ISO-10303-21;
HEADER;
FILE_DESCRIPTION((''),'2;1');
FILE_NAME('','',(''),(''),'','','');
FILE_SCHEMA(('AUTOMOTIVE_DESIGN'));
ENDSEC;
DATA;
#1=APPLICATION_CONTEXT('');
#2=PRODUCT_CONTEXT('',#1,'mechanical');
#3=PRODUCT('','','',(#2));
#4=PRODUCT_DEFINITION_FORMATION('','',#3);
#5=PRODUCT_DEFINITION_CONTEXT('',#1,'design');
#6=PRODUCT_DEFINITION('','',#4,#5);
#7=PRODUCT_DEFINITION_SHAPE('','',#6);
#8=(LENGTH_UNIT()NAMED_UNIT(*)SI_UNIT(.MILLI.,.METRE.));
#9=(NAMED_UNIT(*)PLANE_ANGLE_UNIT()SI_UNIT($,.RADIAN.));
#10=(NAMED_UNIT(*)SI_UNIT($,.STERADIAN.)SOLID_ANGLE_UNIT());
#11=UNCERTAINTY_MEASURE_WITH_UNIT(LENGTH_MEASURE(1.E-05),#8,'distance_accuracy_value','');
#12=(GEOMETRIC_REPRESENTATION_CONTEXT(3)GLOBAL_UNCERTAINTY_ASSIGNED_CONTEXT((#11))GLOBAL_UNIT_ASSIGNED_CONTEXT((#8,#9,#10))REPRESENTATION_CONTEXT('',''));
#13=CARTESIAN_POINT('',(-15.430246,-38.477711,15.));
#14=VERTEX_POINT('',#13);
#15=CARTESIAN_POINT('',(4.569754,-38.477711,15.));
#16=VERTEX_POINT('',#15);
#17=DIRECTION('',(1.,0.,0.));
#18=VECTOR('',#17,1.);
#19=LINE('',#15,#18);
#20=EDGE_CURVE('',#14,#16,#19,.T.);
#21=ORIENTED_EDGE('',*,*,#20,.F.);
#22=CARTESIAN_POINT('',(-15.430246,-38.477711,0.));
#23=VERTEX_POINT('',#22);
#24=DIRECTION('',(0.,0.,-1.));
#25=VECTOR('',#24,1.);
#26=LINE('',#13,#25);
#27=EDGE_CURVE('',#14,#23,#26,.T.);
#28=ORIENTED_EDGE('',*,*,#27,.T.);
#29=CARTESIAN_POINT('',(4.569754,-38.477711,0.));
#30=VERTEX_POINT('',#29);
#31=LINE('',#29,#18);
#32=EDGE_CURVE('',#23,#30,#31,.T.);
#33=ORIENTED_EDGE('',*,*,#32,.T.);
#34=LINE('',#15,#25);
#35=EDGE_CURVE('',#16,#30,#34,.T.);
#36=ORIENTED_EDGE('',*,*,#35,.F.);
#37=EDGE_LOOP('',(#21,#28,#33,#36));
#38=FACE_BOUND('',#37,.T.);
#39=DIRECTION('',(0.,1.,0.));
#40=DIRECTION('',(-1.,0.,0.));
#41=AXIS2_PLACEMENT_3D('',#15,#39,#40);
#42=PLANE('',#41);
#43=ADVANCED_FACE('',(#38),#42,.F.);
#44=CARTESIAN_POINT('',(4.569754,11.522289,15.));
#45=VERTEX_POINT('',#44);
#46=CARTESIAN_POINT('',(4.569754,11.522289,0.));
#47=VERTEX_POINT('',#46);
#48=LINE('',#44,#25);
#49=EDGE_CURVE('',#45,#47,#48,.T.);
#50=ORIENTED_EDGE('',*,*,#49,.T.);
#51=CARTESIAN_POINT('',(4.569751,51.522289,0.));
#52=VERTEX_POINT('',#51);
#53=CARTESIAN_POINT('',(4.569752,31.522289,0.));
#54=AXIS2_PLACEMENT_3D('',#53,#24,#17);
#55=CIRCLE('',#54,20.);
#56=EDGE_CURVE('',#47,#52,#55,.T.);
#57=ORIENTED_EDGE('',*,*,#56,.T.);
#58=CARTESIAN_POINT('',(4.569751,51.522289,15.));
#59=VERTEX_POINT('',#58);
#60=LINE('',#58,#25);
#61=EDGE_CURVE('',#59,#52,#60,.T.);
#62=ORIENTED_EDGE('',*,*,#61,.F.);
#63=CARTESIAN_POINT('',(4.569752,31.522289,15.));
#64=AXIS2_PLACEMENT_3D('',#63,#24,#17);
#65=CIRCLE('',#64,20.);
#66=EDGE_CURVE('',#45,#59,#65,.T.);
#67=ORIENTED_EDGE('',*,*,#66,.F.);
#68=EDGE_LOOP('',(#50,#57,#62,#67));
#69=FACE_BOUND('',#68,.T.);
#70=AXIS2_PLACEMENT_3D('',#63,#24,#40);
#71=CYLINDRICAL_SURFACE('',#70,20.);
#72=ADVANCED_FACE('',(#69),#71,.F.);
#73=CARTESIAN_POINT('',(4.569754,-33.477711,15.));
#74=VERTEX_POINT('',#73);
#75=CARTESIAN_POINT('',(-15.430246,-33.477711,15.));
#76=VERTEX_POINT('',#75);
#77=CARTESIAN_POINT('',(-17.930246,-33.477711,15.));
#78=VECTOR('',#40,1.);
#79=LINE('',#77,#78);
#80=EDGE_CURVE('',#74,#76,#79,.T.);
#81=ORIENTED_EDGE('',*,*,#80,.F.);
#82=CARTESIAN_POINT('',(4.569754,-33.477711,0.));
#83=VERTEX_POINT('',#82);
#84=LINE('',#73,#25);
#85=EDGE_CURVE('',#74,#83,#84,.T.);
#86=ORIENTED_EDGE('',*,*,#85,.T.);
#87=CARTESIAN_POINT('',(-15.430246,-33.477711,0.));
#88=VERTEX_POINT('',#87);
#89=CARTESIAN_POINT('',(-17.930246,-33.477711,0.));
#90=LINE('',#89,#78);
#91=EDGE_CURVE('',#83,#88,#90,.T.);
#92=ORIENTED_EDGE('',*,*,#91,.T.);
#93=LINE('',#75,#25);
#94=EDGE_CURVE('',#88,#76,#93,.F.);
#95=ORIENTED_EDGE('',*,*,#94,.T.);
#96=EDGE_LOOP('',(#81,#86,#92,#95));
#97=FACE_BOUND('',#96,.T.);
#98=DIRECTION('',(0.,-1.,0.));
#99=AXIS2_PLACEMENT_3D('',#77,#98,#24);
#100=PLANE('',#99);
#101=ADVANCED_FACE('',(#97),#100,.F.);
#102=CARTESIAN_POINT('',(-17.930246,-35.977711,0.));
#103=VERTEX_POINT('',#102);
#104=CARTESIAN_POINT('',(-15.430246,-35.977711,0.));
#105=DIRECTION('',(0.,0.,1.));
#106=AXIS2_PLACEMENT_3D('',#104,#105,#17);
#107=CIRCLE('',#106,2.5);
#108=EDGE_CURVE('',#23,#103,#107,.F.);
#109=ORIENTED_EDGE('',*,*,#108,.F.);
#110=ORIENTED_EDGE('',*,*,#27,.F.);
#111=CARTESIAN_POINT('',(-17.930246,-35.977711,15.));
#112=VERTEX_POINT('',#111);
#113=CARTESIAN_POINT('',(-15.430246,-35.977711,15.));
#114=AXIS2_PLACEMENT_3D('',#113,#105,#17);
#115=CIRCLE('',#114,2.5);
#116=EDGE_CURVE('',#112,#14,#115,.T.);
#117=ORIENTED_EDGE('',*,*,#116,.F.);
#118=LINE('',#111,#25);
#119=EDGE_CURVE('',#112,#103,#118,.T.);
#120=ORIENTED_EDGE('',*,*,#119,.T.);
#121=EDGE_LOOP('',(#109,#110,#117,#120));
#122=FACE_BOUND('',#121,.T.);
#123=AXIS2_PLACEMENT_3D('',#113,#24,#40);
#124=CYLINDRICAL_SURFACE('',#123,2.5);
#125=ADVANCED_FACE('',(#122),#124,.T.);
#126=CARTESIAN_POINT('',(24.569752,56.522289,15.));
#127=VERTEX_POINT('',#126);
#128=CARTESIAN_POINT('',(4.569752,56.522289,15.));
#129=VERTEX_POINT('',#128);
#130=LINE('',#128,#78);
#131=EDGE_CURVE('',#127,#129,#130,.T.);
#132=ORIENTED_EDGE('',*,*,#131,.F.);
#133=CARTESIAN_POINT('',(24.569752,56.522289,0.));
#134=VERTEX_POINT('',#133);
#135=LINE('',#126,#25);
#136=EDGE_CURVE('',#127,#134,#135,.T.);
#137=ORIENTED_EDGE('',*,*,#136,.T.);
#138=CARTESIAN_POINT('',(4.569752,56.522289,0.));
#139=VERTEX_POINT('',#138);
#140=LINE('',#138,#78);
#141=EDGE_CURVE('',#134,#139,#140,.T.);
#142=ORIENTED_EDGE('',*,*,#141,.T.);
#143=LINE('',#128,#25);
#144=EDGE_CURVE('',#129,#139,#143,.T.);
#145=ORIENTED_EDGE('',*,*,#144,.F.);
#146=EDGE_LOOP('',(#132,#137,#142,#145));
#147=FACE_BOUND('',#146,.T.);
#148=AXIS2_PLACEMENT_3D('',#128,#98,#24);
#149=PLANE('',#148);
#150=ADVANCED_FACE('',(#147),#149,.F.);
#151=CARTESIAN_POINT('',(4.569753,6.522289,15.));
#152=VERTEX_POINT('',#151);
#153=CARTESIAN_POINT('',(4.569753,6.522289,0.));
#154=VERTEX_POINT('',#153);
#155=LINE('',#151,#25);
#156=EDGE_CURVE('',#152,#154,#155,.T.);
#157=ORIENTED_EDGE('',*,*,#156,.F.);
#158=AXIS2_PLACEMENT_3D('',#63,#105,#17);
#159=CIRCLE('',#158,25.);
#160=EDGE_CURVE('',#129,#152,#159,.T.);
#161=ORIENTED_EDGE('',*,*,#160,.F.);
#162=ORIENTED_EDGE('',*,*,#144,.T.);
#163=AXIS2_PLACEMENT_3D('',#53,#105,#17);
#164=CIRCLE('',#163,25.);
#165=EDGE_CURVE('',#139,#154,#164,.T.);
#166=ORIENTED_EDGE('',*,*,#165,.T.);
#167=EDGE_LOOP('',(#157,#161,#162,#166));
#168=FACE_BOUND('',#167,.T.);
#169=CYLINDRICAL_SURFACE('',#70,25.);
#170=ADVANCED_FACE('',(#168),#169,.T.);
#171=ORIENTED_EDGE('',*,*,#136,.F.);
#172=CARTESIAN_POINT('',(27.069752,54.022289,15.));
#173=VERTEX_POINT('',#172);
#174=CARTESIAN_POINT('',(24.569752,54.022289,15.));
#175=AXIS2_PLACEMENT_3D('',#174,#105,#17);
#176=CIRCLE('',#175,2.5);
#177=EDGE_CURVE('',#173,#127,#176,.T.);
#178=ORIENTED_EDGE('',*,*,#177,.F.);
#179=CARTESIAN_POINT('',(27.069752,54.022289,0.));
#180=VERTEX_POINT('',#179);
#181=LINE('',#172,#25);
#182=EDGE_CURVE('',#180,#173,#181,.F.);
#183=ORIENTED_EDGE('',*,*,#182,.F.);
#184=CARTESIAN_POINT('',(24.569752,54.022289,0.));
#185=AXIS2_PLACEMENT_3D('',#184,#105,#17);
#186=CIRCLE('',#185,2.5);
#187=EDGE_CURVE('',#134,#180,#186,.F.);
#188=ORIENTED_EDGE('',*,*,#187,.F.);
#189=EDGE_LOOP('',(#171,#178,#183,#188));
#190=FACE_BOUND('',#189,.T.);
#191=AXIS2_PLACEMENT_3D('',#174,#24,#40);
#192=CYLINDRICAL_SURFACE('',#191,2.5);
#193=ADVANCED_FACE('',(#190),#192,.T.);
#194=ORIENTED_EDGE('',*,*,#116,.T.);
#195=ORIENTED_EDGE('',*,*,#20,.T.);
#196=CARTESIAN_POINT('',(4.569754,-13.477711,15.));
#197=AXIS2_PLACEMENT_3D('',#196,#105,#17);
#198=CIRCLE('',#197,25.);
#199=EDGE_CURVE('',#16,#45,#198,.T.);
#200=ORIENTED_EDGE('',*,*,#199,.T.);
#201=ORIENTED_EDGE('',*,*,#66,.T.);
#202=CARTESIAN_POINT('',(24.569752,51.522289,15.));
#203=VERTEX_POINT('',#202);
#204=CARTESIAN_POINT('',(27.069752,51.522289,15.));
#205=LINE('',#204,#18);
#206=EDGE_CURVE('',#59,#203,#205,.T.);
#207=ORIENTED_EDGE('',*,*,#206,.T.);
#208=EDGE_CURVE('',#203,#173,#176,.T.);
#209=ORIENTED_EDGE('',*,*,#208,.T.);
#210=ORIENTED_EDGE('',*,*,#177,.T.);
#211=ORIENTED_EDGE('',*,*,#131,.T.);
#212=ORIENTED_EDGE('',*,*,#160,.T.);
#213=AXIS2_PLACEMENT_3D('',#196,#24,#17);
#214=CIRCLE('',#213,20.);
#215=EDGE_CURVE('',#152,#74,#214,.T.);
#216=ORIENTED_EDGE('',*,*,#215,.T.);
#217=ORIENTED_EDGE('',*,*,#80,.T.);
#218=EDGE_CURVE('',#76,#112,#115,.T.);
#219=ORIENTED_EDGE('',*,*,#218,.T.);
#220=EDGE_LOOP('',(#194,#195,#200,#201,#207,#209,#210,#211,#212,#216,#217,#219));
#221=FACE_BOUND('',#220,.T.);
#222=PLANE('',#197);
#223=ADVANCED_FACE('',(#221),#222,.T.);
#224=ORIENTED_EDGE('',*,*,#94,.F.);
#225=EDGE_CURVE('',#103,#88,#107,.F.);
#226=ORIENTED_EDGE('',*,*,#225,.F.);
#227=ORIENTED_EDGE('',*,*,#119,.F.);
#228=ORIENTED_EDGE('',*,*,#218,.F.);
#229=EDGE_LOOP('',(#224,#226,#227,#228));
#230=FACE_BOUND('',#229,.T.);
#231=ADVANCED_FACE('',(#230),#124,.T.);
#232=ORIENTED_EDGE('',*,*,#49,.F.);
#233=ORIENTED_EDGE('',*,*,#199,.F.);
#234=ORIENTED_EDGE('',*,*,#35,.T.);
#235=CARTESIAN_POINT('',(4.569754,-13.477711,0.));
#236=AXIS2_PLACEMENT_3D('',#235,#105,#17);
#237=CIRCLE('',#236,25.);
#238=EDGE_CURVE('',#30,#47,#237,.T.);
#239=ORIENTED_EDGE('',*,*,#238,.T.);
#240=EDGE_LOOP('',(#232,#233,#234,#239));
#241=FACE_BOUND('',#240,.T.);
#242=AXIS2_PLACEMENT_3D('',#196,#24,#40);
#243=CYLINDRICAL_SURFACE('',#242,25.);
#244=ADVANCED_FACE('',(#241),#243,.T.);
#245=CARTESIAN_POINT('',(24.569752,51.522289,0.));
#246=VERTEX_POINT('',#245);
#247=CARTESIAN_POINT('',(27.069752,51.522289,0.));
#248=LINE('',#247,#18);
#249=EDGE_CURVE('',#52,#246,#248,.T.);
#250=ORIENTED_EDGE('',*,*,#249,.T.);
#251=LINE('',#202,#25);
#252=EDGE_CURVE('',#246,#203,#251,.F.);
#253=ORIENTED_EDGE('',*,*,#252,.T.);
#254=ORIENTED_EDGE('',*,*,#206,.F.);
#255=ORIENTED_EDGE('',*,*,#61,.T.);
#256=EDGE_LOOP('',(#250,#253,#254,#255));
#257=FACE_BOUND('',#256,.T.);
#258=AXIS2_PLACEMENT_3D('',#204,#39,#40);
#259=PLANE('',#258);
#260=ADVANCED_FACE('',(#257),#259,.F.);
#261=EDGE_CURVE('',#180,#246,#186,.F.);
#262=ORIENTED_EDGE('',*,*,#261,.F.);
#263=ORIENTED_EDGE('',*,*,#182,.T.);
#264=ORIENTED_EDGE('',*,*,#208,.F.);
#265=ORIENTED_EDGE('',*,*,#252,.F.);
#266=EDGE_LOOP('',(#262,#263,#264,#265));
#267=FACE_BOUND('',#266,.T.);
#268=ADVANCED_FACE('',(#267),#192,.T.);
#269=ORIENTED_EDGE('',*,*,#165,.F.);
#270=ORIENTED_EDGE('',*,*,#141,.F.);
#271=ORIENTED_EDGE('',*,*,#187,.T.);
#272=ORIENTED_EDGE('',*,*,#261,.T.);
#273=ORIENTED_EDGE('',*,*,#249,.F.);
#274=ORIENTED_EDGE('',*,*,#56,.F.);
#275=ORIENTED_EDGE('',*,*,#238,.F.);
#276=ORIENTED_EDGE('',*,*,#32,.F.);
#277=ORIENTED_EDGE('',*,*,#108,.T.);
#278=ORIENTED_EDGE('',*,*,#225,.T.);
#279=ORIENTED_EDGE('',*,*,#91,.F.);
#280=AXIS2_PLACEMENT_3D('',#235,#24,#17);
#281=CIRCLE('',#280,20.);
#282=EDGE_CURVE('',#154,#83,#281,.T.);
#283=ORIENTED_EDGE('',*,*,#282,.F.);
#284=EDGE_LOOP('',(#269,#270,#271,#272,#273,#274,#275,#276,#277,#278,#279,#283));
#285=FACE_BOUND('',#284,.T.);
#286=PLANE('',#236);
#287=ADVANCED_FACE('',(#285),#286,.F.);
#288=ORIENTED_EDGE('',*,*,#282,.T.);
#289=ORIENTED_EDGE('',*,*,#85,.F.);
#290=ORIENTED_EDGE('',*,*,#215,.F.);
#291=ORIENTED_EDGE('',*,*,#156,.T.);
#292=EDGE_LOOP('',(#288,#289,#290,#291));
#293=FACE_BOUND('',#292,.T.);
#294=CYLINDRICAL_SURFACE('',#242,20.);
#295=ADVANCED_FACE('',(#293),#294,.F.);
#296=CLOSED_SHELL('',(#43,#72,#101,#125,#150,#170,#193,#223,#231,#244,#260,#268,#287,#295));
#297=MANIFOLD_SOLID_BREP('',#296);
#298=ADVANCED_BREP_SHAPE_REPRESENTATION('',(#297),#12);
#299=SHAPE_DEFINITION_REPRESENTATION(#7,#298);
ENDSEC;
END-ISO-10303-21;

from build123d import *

# Parameters (mm, degrees)
BOSS_EXTRUDE1_DEPTH = 15
FILLET1_R           = 2.5


with BuildPart() as part:
    # Sketch1 → Boss-Extrude1 (new body)
    with BuildSketch(Plane.XY):
        with BuildLine():
            Line((4.569752453, 56.5222889), (27.069752453, 56.5222889))
            Line((27.069752453, 56.5222889), (27.069752453, 51.5222889))
            Line((27.069752453, 51.5222889), (4.569751288, 51.5222889))
            ThreePointArc((4.569751288, 51.5222889), (-15.430247547, 31.522287735), (4.569753619, 11.5222889))
            ThreePointArc((4.569753619, 11.5222889), (29.569753619, -13.4777111), (4.569753619, -38.4777111))
            Line((4.569753619, -38.4777111), (-17.930246381, -38.4777111))
            Line((-17.930246381, -38.4777111), (-17.930246381, -33.4777111))
            Line((-17.930246381, -33.4777111), (4.569753619, -33.4777111))
            ThreePointArc((4.569753619, -33.4777111), (24.569753619, -13.477710841), (4.569753101, 6.5222889))
            ThreePointArc((4.569753101, 6.5222889), (-20.430247547, 31.522288577), (4.569752453, 56.5222889))
        make_face()
    extrude(amount=BOSS_EXTRUDE1_DEPTH)

    # Fillet1
    fillet1_edges = [part.edges().sort_by_distance(p)[0] for p in [
        (-17.930246381, -38.4777111, 7.5),
        (-17.930246381, -33.4777111, 7.5),
        (27.069752453, 51.5222889, 7.5),
        (27.069752453, 56.5222889, 7.5),
    ]]
    fillet(fillet1_edges, radius=FILLET1_R - 0.0001)  # a hair under: the kernel refuses the full size


solid = part.part
